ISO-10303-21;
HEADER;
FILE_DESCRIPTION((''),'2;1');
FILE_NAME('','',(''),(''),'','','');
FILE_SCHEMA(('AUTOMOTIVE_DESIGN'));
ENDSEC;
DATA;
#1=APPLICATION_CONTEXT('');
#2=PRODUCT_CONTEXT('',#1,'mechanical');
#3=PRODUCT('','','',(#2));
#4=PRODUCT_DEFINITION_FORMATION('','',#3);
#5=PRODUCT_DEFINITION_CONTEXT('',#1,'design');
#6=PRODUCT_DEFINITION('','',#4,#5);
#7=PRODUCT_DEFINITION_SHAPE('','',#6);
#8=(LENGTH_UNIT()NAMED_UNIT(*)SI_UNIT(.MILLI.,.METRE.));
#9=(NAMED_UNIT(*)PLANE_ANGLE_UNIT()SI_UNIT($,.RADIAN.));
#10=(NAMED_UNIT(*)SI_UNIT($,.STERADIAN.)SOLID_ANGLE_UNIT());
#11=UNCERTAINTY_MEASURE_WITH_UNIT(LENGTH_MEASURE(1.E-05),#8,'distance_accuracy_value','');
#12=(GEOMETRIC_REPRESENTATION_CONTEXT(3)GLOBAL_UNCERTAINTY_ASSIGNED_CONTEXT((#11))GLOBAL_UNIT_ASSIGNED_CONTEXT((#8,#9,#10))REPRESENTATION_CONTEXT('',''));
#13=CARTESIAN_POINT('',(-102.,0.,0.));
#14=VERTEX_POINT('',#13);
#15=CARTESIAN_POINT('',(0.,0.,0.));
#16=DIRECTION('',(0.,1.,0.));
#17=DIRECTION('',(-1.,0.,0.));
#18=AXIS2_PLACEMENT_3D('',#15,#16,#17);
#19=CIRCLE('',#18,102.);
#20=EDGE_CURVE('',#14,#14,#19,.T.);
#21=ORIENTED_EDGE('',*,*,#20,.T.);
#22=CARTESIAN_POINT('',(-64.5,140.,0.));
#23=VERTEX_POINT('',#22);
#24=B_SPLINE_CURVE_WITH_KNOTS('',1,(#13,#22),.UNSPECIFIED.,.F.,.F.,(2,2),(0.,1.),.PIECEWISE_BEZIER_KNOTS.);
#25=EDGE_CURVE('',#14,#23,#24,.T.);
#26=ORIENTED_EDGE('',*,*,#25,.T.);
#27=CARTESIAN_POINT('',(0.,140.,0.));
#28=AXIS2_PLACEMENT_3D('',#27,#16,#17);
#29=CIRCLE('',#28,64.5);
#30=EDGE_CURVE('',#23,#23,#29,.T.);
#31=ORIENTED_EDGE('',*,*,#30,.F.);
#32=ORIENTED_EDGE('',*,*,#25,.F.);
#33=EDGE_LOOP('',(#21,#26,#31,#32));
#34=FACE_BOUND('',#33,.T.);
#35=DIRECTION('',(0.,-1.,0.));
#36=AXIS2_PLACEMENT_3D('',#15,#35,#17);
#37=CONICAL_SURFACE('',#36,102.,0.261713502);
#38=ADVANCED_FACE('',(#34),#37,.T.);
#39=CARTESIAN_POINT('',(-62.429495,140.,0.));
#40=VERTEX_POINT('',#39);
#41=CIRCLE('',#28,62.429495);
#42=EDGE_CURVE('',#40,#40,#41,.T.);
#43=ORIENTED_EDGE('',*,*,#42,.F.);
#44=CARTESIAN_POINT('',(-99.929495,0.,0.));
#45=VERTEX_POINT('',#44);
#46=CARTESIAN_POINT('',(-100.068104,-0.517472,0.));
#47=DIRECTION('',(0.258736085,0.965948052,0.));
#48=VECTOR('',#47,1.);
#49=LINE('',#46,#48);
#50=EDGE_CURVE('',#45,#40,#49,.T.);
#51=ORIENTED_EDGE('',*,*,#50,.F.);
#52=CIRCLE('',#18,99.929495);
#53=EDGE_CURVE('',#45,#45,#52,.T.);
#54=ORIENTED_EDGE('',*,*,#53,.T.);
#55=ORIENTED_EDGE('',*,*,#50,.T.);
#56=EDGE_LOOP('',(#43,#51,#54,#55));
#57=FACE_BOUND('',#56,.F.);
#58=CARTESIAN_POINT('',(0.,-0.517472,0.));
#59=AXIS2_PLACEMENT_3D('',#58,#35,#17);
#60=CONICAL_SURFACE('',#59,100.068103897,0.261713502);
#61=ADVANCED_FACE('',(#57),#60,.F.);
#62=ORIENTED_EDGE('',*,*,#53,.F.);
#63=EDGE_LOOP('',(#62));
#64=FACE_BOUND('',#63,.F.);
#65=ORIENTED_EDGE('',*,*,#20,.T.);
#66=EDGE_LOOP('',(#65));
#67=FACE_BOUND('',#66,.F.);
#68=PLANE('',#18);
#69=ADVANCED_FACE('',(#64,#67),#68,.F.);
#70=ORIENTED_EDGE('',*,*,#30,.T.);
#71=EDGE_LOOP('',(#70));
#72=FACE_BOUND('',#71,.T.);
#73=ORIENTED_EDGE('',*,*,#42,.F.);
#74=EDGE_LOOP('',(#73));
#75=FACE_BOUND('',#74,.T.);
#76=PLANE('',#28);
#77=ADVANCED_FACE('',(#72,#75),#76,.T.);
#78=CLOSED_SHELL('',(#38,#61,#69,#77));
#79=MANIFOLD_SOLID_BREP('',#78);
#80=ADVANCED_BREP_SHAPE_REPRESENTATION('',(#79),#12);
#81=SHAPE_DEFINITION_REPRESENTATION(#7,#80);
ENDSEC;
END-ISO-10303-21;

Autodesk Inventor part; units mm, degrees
ref_plane "YZ Plane" through (0, 0, 0) normal (1, 0, 0) x (0, 1, 0)
ref_plane "XY Plane" through (0, 0, 0) normal (0, 0, 1) x (1, 0, 0)
sketch "Szkic6" plane through (0, 0, 0) normal (0, 1, 0) x (-1, 0, 0)
  circle A0 centre (0, 0) radius 102
  dimension "d33" = 204
ref_plane "Płaszczyzna konstrukcyjna1" through (0, 140, 0) normal (0, 1, 0) x (-1, 0, 0)
sketch "Szkic7" plane through (0, 140, 0) normal (0, 1, 0) x (-1, 0, 0)
  circle A0 centre (0, 0) radius 64.5
  dimension "d35" = 129
loft "Wyciągnięcie złożone1" add profiles "Szkic6", "Szkic7"
shell "Skorupa1" thickness 2 removed faces 2 at (8.6004, 140, -5.9504) at (-23.2432, 0, 54.3964)
equation "\"d33\" = OD1"
equation "\"d35\" = OD2"
equation "\"d52\" = THK"
equation "\"SzerokośćGięciaPodcięcia\" = Grubość"
equation "\"RozmiarPodcięciaNarożnika\" = 4 * Grubość"
equation "\"PromieńPrzejścia\" = PromieńGięcia"
equation "\"Rozmiar_promienia_Jacobiego\" = PromieńGięcia"
equation "\"Wielk_odstępu\" = Grubość"
equation "\"d2\" = PromieńGięcia"
equation "\"d23\" = PromieńGięcia"
equation "\"OD1\" = 204"
equation "\"OD2\" = 129"
equation "\"THK\" = 2"
equation "\"Grubość\" = 1.5"
equation "\"PromieńGięcia\" = 3"
properties part number "Redukcja symetryczna Ø204x129x2 L=140" material "304"
